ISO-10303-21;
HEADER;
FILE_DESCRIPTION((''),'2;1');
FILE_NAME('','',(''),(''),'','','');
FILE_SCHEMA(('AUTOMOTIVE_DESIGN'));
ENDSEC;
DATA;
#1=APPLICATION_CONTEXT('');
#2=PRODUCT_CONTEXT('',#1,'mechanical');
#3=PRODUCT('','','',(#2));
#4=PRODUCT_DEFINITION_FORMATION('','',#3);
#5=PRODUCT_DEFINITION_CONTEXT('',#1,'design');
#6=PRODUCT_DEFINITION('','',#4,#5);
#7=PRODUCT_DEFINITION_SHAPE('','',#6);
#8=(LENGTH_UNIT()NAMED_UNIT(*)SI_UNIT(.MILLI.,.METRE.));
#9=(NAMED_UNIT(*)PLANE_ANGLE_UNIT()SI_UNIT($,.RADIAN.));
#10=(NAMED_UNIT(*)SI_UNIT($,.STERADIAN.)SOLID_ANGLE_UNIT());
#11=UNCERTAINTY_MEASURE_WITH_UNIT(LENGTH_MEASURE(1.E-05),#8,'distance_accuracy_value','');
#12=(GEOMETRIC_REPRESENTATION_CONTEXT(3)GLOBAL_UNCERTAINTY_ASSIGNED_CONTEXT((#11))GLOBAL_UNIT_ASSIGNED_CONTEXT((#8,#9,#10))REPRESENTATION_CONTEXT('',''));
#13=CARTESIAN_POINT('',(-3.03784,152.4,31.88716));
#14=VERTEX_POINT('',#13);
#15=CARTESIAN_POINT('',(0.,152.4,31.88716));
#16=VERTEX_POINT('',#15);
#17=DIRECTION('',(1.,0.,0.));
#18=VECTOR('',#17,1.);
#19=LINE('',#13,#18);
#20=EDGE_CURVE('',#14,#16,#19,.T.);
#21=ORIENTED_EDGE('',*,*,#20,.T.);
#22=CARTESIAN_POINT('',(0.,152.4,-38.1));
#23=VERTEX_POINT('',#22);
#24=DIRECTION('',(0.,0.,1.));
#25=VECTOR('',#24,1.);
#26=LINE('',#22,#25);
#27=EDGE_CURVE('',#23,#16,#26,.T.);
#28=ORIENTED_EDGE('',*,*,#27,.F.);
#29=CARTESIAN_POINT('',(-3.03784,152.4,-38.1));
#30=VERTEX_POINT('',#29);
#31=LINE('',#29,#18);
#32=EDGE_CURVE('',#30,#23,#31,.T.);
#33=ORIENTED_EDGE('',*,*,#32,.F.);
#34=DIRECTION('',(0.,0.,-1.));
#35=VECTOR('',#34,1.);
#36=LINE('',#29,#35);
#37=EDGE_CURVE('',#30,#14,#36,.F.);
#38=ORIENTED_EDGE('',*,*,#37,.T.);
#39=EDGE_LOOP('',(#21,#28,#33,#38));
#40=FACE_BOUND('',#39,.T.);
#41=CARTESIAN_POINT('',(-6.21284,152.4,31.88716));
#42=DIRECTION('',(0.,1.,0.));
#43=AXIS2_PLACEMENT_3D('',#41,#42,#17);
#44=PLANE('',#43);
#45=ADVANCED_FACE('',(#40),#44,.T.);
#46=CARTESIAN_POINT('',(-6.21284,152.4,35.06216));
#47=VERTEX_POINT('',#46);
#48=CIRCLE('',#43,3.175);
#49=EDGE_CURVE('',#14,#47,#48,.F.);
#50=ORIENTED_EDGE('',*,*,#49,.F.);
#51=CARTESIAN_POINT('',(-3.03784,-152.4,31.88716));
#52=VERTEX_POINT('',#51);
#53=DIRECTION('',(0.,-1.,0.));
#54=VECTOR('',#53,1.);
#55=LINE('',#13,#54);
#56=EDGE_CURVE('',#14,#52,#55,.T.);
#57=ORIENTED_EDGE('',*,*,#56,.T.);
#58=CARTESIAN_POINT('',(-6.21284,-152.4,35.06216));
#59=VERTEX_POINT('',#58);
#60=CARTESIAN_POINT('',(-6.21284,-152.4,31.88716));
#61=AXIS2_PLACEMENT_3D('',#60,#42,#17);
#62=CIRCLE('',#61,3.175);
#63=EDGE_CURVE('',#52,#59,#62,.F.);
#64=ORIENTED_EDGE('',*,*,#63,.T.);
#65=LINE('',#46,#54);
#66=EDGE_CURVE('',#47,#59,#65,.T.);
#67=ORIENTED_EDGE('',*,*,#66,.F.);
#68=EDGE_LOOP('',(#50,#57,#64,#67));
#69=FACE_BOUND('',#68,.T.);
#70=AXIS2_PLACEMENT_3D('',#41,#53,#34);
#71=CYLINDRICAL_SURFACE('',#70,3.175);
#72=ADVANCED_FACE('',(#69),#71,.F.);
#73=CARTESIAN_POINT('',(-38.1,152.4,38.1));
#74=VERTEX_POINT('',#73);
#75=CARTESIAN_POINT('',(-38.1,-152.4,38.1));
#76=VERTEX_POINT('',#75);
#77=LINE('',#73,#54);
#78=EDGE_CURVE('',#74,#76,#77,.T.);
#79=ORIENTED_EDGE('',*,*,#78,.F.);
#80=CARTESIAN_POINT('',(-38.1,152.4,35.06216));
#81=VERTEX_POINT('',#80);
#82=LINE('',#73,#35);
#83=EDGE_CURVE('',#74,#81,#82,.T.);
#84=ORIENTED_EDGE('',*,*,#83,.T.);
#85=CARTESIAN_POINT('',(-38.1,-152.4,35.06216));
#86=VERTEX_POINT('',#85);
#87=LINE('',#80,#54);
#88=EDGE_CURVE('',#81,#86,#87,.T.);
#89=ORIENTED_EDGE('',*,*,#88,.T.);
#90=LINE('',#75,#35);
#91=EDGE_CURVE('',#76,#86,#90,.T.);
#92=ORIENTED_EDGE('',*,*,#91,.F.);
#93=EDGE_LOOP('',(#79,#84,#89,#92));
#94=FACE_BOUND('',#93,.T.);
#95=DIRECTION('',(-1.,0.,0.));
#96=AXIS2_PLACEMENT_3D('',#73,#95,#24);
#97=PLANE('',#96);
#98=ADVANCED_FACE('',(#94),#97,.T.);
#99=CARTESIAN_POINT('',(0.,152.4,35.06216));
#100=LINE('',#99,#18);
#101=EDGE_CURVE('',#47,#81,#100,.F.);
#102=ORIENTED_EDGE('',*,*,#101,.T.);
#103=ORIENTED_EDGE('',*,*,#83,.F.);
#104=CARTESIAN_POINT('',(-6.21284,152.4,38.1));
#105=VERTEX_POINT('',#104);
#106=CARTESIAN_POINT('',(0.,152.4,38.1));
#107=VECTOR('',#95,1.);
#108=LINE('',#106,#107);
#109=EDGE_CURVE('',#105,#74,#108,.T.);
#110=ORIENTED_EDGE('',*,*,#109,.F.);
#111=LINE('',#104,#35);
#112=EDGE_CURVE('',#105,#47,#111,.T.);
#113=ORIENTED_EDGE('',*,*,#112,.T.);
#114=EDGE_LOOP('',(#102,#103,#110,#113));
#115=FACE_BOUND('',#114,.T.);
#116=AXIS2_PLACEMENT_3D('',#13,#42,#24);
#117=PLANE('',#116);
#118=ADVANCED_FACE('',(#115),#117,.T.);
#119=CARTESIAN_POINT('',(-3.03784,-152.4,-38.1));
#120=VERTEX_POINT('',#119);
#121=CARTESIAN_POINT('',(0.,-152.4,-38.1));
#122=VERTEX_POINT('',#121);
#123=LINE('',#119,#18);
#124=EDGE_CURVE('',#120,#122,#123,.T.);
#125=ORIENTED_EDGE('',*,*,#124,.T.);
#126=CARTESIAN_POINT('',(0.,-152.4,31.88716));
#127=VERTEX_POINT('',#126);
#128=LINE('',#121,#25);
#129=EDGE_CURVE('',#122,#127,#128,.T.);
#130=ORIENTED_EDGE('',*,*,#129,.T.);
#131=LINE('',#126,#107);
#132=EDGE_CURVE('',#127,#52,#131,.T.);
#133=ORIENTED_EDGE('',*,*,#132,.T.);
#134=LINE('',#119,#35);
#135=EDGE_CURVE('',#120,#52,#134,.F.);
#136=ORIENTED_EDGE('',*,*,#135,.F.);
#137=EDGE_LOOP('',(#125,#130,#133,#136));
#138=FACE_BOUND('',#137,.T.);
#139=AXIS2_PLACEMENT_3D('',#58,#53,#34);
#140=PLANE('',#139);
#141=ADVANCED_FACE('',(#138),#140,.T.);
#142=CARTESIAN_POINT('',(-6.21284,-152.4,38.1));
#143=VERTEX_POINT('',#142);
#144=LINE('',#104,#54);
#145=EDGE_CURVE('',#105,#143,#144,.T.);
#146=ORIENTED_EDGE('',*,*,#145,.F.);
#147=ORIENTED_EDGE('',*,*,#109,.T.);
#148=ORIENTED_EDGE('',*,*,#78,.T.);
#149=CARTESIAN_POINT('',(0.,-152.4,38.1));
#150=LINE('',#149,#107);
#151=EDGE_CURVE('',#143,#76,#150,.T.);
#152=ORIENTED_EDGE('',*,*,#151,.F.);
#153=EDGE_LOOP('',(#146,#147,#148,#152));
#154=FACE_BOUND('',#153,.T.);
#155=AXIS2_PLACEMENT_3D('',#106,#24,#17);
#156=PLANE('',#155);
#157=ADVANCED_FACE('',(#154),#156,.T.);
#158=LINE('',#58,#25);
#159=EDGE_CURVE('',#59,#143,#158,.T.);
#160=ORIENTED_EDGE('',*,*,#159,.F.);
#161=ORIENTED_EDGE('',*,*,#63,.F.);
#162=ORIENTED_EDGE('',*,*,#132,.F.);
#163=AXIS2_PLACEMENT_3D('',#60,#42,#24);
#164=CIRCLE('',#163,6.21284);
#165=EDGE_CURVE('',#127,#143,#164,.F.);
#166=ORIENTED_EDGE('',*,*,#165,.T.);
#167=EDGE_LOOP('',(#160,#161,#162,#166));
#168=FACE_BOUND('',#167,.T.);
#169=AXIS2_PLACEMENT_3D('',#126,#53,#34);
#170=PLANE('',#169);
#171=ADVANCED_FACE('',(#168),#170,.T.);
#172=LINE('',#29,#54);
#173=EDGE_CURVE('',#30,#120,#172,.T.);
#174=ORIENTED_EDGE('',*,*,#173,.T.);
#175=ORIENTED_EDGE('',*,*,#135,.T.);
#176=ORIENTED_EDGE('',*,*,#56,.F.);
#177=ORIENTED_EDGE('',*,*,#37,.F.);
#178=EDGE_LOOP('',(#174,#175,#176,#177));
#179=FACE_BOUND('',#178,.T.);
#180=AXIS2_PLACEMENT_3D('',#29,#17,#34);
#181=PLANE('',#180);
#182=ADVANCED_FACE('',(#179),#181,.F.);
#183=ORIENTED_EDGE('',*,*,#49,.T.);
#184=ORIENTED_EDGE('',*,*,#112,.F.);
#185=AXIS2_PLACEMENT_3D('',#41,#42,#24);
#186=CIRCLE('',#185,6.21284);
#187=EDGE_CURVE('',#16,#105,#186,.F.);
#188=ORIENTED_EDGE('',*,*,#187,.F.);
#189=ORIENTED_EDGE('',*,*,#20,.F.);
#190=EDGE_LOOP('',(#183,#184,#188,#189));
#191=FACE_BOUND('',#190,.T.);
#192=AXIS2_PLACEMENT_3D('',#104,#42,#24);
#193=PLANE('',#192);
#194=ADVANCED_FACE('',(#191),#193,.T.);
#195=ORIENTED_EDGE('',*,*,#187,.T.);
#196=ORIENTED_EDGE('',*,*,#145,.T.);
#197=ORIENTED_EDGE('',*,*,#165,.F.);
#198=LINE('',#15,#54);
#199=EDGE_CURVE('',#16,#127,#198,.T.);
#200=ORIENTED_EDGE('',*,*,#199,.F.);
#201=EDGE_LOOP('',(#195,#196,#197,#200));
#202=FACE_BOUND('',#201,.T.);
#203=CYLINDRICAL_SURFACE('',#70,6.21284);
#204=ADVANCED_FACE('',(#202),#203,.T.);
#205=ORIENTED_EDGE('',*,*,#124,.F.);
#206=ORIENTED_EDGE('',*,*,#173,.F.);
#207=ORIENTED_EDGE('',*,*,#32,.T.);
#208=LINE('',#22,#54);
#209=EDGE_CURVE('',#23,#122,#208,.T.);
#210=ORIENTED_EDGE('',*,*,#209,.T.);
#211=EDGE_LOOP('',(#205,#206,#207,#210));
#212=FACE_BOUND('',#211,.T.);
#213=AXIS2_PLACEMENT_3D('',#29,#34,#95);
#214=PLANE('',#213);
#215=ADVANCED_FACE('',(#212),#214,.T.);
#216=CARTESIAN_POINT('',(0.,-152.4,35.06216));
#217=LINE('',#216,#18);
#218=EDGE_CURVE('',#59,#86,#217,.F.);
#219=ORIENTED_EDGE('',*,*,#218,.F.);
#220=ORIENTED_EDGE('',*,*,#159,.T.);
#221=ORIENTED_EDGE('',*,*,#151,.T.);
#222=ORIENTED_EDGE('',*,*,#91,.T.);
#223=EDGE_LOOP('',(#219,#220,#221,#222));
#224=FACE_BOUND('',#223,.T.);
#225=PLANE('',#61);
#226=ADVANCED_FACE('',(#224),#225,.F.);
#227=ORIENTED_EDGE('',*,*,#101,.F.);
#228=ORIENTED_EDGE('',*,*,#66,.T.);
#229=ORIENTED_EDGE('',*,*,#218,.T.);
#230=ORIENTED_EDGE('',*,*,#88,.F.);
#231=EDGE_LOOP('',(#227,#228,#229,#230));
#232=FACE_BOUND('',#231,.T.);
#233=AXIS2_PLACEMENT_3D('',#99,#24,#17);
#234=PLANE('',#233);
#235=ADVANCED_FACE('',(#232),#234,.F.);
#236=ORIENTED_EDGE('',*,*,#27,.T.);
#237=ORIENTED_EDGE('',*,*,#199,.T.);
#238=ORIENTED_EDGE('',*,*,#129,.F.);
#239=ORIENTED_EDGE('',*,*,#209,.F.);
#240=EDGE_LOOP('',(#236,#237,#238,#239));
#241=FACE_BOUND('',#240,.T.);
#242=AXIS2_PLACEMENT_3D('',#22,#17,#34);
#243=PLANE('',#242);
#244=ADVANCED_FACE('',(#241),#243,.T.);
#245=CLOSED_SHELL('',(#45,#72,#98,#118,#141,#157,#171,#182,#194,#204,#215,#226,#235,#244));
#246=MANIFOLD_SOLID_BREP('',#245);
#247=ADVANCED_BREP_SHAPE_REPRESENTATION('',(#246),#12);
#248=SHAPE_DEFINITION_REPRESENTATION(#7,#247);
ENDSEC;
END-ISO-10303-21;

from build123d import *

# Parameters (mm, degrees)
BASE_FLANGE1_DEPTH = 152.4


# Sheet-metal steps are written as plain solids
with BuildPart() as part:
    # Sketch1 → Base-Flange1 (new, symmetric)
    with BuildSketch(Plane(origin=(0, 0, 0), x_dir=(1, 0, 0), z_dir=(0, 1, 0))):
        with BuildLine():
            Line((0, 38.1), (0, -31.88716))
            ThreePointArc((0, -31.88716), (-1.819698706, -36.280301294), (-6.21284, -38.1))
            Line((-6.21284, -38.1), (-38.1, -38.1))
            Line((-38.1, -38.1), (-38.1, -35.06216))
            Line((-38.1, -35.06216), (-6.21284, -35.06216))
            ThreePointArc((-6.21284, -35.06216), (-3.96777597, -34.13222403), (-3.03784, -31.88716))
            Line((-3.03784, -31.88716), (-3.03784, 38.1))
            Line((-3.03784, 38.1), (0, 38.1))
        make_face()
    extrude(amount=BASE_FLANGE1_DEPTH, both=True)


solid = part.part
